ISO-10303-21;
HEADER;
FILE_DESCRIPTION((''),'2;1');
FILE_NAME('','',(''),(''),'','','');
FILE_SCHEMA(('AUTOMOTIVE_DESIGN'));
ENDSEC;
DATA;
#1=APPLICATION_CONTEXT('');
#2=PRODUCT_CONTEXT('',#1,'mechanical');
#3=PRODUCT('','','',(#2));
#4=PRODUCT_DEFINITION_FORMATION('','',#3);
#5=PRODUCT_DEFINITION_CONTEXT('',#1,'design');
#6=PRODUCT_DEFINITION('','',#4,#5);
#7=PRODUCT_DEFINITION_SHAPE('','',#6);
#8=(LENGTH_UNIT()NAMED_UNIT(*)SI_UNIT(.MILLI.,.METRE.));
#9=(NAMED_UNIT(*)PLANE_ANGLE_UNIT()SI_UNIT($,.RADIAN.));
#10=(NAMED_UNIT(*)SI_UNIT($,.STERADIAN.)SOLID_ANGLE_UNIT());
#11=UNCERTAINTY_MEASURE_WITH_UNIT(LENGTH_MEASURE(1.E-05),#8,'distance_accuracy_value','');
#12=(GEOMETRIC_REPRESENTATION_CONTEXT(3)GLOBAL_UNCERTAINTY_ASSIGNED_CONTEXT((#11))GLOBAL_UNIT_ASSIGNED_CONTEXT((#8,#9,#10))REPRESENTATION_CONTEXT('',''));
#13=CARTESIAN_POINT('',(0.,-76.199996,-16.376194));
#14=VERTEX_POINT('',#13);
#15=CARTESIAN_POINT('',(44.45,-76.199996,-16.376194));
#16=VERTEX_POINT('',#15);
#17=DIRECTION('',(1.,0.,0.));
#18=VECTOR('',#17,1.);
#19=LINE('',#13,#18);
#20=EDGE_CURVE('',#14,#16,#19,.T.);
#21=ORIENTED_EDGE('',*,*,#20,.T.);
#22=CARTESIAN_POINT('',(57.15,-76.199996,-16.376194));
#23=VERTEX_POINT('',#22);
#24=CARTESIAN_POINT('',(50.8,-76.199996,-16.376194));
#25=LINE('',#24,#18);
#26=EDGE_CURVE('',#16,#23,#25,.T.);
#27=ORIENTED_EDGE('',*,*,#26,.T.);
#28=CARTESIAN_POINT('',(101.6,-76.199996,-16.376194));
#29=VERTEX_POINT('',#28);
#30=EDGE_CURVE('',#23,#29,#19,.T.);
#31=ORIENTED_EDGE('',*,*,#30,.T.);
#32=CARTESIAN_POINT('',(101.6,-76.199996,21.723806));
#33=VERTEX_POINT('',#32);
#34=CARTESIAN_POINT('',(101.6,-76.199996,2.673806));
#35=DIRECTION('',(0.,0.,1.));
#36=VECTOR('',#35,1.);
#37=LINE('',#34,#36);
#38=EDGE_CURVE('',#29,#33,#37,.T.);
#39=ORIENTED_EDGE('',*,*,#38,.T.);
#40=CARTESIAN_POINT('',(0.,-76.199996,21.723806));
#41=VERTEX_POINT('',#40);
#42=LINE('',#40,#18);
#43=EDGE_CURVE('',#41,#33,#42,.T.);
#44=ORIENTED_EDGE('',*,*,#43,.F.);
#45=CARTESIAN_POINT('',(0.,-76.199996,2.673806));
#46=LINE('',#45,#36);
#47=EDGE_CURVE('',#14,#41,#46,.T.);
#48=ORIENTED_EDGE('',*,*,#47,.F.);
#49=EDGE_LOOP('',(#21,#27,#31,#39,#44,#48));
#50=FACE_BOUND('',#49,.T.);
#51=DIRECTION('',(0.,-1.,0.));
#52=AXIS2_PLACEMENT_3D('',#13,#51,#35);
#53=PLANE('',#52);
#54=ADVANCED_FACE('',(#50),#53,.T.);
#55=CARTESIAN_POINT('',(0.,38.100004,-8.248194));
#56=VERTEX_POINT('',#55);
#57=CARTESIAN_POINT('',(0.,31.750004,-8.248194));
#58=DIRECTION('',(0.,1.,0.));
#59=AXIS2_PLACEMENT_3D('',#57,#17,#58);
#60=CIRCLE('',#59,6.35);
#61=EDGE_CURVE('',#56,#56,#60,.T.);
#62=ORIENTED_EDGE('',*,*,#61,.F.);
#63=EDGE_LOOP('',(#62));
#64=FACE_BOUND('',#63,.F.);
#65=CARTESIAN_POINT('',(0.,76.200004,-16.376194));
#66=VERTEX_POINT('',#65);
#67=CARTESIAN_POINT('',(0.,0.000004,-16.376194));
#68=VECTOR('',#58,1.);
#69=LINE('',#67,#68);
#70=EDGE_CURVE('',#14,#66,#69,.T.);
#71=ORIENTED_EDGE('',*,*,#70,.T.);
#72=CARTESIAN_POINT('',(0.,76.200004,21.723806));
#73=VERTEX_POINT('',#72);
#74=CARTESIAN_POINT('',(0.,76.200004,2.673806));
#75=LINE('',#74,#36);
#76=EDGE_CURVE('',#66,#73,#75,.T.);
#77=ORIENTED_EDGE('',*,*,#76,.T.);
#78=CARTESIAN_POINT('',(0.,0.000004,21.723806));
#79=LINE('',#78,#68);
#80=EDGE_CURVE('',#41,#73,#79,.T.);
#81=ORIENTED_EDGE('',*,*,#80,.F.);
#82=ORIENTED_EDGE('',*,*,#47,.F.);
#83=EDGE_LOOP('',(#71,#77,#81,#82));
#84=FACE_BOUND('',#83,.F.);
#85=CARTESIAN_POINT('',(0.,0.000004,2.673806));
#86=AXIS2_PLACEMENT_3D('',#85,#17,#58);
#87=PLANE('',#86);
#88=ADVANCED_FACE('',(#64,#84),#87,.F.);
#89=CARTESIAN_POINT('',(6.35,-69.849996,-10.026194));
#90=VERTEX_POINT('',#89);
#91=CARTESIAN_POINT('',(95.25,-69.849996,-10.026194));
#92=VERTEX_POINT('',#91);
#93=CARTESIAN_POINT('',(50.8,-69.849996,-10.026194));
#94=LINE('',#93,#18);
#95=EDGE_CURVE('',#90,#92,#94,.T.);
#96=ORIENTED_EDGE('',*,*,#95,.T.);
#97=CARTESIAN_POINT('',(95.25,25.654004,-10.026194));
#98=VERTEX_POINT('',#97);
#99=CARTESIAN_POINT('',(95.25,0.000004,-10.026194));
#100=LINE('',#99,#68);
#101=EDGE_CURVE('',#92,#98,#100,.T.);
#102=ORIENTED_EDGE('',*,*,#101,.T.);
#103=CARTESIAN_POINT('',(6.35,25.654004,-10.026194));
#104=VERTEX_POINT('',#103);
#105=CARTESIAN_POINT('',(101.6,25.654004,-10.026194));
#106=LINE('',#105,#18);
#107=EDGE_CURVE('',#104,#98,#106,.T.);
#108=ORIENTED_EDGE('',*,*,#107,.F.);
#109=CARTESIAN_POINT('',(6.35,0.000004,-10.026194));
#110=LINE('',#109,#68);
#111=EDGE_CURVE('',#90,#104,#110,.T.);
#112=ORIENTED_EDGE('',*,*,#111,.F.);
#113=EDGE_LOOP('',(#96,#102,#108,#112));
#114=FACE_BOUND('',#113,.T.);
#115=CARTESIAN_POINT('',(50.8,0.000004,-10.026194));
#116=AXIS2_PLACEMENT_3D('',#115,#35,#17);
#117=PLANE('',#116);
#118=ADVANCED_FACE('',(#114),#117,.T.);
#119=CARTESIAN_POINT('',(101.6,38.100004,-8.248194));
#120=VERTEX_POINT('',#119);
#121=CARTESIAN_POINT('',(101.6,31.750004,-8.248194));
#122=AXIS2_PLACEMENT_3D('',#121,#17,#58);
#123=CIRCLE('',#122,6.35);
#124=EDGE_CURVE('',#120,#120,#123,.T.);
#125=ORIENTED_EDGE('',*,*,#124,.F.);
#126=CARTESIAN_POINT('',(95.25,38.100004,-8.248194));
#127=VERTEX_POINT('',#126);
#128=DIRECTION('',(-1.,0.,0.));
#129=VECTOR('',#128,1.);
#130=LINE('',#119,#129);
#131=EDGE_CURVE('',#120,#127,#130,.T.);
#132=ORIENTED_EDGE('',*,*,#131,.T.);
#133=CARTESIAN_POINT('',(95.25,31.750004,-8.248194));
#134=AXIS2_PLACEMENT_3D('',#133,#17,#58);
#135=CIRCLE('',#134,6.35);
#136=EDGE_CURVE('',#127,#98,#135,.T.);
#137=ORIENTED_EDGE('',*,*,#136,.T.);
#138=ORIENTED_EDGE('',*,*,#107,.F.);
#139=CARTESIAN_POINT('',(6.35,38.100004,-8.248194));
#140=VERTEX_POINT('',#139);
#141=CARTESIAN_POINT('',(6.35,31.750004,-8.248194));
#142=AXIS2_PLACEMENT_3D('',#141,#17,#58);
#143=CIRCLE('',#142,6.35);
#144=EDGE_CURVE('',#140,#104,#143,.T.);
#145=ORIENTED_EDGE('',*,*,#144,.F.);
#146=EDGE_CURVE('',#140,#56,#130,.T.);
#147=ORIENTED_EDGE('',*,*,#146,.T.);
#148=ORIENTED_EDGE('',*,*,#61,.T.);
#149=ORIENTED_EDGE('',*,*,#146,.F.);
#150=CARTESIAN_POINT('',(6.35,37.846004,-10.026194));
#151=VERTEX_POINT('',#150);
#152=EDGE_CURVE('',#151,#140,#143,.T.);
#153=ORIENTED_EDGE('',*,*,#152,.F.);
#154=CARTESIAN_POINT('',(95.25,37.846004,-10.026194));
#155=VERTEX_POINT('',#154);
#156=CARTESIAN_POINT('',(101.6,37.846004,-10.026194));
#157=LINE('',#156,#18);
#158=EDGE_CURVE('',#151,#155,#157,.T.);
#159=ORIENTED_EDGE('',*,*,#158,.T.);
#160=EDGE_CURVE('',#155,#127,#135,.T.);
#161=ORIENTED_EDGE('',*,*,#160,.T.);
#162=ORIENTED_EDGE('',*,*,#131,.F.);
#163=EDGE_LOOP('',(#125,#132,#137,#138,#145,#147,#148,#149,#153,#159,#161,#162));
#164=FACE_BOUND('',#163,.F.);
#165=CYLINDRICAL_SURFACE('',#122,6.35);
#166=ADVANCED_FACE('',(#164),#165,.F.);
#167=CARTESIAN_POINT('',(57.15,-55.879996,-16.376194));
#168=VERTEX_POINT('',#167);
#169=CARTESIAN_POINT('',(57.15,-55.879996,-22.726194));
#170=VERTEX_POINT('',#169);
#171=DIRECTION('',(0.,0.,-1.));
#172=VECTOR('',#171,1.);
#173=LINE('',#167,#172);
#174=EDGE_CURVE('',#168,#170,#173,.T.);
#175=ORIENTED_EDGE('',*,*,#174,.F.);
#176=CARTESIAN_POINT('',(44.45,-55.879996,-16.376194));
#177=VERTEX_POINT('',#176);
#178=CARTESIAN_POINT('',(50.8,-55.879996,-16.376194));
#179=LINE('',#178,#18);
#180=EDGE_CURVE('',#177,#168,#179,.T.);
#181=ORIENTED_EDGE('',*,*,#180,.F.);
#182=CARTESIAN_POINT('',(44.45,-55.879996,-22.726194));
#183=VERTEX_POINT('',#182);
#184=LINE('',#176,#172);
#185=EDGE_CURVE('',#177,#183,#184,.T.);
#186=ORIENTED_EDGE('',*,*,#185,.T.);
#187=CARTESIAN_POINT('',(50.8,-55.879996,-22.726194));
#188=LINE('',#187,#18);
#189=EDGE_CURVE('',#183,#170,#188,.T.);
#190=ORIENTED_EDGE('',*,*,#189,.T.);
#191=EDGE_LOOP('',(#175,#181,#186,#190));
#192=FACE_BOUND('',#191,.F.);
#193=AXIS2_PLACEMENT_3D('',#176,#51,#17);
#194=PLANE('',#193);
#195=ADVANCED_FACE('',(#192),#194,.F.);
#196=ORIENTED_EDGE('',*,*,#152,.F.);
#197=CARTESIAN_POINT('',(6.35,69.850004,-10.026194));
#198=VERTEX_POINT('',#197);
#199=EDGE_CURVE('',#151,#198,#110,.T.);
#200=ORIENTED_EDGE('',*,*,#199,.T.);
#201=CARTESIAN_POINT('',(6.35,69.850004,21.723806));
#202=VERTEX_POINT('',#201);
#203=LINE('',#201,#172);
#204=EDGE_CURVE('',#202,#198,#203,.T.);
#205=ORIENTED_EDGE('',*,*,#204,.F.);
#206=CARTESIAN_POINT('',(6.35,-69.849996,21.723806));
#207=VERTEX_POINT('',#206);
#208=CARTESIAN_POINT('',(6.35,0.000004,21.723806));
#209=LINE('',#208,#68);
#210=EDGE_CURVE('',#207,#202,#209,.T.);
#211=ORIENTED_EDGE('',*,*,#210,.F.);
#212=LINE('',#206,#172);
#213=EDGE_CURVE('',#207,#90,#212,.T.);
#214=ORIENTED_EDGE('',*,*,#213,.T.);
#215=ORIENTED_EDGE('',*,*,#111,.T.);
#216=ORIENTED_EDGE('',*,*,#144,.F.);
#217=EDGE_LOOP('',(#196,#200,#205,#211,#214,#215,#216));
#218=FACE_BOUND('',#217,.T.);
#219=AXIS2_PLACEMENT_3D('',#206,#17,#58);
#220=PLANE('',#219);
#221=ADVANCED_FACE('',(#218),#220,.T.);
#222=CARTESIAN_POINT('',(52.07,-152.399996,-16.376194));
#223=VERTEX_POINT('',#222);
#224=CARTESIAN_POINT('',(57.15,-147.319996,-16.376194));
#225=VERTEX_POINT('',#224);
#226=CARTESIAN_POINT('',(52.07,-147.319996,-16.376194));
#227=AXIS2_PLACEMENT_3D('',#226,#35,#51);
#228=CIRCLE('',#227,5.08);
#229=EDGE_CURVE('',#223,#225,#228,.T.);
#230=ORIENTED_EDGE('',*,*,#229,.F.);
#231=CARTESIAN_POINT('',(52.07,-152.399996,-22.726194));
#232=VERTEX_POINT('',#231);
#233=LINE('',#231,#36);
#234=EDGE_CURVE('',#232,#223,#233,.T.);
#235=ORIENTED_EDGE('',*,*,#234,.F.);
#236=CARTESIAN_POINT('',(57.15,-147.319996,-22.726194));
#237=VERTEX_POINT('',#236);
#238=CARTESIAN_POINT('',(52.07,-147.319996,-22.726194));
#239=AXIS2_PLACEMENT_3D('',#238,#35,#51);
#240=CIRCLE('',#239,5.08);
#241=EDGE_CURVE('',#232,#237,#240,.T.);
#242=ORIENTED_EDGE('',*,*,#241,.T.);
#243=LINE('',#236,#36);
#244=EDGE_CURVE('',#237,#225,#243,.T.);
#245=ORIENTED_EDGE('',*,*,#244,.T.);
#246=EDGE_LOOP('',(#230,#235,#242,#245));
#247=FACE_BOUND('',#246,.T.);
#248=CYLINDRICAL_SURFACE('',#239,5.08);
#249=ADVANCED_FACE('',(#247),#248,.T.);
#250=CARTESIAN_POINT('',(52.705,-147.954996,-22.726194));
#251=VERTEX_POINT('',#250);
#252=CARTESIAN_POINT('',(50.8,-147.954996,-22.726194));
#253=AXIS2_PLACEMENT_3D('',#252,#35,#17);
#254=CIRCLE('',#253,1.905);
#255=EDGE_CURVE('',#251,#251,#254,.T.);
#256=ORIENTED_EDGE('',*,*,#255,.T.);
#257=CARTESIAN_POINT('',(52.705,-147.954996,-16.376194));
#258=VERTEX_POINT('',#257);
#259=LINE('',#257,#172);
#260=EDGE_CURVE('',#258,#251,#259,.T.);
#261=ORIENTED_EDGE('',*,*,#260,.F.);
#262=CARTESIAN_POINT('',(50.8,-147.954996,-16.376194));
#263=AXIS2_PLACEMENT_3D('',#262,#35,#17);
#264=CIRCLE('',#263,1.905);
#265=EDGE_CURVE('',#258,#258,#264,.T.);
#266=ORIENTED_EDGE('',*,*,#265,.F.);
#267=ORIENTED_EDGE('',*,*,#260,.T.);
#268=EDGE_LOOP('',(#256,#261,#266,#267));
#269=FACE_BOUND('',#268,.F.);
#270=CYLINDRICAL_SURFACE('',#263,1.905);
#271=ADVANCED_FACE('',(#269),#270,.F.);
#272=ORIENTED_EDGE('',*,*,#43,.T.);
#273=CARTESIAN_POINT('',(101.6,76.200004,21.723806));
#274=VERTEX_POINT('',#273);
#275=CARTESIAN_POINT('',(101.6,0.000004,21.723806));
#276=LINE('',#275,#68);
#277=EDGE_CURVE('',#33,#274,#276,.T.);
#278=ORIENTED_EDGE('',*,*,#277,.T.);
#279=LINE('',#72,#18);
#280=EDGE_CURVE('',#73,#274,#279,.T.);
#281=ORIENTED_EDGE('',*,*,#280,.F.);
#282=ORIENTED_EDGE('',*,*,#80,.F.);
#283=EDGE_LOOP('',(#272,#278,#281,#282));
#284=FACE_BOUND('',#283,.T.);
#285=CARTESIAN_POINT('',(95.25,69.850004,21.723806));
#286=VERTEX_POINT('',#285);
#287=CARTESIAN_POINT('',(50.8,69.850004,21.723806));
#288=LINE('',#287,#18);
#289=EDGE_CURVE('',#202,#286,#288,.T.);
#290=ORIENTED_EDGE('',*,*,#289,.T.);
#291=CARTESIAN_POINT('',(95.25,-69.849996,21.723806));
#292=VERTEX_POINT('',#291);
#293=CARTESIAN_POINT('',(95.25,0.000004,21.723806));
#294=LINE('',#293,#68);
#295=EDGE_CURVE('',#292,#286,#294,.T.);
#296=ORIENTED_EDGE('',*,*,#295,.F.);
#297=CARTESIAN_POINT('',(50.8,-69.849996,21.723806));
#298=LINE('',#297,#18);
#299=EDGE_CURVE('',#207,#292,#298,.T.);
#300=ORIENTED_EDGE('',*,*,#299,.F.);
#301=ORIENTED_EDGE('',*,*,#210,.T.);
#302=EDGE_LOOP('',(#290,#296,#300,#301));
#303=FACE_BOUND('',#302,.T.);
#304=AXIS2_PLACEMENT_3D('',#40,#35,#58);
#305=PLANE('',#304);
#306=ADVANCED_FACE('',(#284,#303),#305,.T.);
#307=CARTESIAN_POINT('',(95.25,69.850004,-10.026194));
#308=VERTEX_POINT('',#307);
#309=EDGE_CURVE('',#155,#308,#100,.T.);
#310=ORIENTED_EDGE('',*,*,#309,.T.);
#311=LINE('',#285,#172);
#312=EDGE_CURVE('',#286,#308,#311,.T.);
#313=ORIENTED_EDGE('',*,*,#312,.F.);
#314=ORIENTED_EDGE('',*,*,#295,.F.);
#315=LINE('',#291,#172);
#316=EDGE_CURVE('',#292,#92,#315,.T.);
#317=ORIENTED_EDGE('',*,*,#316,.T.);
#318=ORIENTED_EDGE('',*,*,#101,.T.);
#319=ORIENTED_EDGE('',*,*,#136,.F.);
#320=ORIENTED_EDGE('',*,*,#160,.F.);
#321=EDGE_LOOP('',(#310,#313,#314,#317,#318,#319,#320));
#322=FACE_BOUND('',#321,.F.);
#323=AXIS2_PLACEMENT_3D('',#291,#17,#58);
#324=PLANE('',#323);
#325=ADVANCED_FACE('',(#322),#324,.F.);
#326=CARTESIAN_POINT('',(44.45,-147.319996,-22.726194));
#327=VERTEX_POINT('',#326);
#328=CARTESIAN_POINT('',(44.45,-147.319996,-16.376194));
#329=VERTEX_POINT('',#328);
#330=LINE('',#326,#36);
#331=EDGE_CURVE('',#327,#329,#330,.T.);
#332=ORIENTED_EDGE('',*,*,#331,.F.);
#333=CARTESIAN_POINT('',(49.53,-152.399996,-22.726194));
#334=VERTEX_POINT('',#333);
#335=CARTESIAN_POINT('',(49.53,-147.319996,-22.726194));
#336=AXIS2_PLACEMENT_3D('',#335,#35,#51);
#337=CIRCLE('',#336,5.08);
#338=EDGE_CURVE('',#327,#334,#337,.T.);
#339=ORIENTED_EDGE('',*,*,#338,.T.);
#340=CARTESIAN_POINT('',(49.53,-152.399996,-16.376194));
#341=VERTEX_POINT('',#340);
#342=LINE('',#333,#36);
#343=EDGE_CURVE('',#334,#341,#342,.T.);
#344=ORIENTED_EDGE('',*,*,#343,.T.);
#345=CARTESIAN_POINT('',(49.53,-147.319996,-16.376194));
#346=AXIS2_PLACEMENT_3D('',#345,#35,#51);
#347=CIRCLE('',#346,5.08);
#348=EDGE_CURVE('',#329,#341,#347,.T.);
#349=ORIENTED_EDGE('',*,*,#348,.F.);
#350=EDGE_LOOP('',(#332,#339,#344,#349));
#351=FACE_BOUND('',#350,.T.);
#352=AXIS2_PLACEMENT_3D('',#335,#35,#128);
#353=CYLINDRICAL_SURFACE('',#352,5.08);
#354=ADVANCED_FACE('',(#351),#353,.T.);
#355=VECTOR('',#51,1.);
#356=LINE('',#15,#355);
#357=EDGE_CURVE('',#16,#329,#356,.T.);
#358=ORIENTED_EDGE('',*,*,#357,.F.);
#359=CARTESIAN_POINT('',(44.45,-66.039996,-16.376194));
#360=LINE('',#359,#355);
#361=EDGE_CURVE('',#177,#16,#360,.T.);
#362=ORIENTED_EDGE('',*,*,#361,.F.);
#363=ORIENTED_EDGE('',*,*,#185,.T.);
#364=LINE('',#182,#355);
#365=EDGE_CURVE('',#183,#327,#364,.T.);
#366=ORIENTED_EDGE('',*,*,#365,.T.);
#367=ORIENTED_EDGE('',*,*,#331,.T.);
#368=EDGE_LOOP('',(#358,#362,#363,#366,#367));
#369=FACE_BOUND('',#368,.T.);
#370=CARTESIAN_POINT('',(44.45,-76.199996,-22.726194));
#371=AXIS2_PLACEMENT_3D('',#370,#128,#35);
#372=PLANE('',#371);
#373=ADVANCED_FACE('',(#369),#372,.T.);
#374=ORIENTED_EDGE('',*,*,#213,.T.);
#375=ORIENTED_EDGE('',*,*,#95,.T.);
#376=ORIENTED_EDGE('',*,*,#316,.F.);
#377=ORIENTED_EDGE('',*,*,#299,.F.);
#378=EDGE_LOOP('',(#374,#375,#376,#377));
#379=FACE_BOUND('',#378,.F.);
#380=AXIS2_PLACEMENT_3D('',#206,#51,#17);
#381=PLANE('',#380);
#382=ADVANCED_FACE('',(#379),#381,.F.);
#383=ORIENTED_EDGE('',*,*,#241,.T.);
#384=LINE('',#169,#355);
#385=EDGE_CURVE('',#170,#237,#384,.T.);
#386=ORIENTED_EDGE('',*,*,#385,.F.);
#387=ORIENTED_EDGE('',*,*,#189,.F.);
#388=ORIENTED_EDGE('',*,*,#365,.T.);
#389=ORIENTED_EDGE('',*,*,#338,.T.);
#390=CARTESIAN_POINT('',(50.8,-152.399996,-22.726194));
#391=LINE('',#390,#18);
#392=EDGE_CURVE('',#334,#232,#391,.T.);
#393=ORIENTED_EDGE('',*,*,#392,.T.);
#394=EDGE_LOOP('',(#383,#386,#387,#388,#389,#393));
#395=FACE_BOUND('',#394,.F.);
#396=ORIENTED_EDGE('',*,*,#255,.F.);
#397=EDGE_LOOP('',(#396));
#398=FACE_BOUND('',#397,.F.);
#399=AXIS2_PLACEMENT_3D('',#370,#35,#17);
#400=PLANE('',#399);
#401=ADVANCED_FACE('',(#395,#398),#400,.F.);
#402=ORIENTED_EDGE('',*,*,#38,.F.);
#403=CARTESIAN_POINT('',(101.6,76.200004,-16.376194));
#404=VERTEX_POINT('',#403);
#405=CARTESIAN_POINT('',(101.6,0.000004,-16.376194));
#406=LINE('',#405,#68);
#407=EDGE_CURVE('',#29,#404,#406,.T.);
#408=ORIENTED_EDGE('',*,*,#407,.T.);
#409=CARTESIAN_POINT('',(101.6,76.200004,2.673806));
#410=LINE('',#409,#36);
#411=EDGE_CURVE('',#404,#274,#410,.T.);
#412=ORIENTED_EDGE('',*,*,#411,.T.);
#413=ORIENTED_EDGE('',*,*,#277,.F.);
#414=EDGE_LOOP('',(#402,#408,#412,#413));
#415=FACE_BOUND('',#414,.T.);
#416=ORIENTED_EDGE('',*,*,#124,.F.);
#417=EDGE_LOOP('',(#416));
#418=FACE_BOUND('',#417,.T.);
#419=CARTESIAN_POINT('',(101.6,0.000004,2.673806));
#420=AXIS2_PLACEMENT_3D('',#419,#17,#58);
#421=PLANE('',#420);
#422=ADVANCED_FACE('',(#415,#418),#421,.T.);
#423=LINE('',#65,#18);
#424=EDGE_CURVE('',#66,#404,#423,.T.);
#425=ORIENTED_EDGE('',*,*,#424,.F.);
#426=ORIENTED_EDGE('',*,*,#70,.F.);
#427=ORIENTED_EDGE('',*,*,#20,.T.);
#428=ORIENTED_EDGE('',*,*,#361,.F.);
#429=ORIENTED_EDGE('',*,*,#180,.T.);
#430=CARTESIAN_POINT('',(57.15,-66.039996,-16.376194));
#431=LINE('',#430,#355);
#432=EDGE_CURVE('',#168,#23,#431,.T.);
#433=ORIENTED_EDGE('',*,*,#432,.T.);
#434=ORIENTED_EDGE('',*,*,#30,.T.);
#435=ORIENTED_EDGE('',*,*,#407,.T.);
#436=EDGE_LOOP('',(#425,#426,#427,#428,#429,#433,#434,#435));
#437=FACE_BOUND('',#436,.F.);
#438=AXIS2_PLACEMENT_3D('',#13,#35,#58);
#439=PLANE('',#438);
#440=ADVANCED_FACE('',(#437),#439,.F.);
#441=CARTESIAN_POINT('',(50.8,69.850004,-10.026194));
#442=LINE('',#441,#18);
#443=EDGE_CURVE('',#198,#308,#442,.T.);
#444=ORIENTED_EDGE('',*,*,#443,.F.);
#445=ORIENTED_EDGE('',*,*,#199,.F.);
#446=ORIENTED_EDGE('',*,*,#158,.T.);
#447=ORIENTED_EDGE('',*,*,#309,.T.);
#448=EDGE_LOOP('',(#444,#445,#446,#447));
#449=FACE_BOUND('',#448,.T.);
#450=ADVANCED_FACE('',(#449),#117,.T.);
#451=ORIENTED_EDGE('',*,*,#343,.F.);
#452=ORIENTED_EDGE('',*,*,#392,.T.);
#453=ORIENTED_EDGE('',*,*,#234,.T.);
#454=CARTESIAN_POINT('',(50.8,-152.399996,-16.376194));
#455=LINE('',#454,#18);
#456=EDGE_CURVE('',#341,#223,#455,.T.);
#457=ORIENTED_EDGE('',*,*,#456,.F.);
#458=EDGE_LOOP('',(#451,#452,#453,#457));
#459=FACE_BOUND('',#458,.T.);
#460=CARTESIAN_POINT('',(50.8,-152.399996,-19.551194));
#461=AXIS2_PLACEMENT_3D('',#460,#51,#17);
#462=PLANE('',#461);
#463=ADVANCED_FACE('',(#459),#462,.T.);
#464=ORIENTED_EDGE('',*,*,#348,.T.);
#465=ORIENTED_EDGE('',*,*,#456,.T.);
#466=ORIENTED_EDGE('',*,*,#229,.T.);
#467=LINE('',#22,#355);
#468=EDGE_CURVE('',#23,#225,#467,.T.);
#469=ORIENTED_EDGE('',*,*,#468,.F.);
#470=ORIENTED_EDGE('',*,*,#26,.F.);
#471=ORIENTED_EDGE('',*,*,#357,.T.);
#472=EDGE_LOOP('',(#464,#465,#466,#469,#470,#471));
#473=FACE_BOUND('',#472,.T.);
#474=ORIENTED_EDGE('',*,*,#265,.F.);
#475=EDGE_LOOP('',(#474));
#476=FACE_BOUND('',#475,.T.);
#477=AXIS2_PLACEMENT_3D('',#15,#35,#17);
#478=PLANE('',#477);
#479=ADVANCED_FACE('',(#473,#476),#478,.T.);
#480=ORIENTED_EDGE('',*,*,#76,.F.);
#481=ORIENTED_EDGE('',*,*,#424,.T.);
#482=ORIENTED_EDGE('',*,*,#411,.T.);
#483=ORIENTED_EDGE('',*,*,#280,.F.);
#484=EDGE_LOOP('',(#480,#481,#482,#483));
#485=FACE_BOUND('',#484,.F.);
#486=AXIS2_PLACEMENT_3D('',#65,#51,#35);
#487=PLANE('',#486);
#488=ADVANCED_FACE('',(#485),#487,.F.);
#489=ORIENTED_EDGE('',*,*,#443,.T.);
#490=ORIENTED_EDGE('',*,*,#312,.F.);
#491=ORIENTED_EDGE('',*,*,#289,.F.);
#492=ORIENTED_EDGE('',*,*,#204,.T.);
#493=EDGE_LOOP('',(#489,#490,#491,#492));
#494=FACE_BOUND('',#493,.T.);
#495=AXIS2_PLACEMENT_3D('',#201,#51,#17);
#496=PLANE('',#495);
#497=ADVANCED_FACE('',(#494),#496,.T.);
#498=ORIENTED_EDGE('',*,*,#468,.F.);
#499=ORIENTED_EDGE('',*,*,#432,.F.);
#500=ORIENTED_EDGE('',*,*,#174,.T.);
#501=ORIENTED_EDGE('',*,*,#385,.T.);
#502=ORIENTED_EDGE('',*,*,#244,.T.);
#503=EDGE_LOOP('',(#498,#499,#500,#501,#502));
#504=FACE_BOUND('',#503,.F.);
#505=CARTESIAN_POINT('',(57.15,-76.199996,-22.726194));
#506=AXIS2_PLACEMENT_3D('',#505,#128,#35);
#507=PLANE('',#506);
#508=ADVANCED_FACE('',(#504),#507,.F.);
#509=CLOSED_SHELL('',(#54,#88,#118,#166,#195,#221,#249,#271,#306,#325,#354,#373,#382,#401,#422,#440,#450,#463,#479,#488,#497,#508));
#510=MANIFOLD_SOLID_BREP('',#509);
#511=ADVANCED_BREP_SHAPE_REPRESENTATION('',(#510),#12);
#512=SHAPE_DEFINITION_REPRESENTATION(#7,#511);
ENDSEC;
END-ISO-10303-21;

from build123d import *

# Parameters (mm, degrees)
F0_W      = 152.4
F0_H      = 38.1
F1_DEPTH  = 101.6
F2_W      = 88.9
F2_H      = 139.7
F3_DEPTH  = 31.75
F4_R      = 6.35
F5_DEPTH  = 101.6
F6_W      = 12.7
F6_H      = 20.32
F7_DEPTH  = 6.35
F8_W      = 12.7
F8_H      = 6.35
F9_DEPTH  = 76.2
F10_R     = 1.905
F11_DEPTH = 6.35
F12_R     = 5.08


# Not quite as in the source:
# - two fillets or chamfers of one size are made in one step
# - a feature names something its author has since deleted; it is built from what else it names


with BuildPart() as f1:
    # F0 (on Right) → F1 (new body)
    with BuildSketch(Plane.YZ):
        with Locations((3.7253e-06, 2.6738062448)):
            Rectangle(F0_W, F0_H)
    extrude(amount=F1_DEPTH)

    # F2 (on face) → F3 (cut)
    with BuildSketch(Plane.XY.offset(21.7238062448)):
        with Locations((50.8, 3.7253e-06)):
            Rectangle(F2_W, F2_H)
    extrude(amount=-F3_DEPTH, mode=Mode.SUBTRACT)

    # F4 (on face) → F5 (cut)
    with BuildSketch(Plane.YZ.offset(101.6)):
        with Locations((31.7500037253, -8.2481937552)):
            Circle(F4_R)
    extrude(amount=-F5_DEPTH, mode=Mode.SUBTRACT)

    # F6 (on face) → F7 (join)
    with BuildSketch(Plane(origin=(0, 0, -16.3761937552), x_dir=(1, 0, 0), z_dir=(0, 0, -1))):
        with Locations((50.8, 66.0399962747)):
            Rectangle(F6_W, F6_H)
    extrude(amount=F7_DEPTH)

    # F8 (on face) → F9 (join)
    with BuildSketch(Plane.XZ.offset(76.1999962747)):
        with Locations((50.8, -19.5511937552)):
            Rectangle(F8_W, F8_H)
    extrude(amount=F9_DEPTH)

    # F10 (on face) → F11 (cut)
    with BuildSketch(Plane.XY.offset(-16.3761937552)):
        with Locations((50.8, -147.9549962747)):
            Circle(F10_R)
    extrude(amount=-F11_DEPTH, mode=Mode.SUBTRACT)

    # F12
    f12_edges = [f1.edges().sort_by_distance(p)[0] for p in [
        (44.45, -152.399996, -19.551194),
        (57.15, -152.399996, -19.551194),
    ]]
    fillet(f12_edges, radius=F12_R)


solid = f1.part
